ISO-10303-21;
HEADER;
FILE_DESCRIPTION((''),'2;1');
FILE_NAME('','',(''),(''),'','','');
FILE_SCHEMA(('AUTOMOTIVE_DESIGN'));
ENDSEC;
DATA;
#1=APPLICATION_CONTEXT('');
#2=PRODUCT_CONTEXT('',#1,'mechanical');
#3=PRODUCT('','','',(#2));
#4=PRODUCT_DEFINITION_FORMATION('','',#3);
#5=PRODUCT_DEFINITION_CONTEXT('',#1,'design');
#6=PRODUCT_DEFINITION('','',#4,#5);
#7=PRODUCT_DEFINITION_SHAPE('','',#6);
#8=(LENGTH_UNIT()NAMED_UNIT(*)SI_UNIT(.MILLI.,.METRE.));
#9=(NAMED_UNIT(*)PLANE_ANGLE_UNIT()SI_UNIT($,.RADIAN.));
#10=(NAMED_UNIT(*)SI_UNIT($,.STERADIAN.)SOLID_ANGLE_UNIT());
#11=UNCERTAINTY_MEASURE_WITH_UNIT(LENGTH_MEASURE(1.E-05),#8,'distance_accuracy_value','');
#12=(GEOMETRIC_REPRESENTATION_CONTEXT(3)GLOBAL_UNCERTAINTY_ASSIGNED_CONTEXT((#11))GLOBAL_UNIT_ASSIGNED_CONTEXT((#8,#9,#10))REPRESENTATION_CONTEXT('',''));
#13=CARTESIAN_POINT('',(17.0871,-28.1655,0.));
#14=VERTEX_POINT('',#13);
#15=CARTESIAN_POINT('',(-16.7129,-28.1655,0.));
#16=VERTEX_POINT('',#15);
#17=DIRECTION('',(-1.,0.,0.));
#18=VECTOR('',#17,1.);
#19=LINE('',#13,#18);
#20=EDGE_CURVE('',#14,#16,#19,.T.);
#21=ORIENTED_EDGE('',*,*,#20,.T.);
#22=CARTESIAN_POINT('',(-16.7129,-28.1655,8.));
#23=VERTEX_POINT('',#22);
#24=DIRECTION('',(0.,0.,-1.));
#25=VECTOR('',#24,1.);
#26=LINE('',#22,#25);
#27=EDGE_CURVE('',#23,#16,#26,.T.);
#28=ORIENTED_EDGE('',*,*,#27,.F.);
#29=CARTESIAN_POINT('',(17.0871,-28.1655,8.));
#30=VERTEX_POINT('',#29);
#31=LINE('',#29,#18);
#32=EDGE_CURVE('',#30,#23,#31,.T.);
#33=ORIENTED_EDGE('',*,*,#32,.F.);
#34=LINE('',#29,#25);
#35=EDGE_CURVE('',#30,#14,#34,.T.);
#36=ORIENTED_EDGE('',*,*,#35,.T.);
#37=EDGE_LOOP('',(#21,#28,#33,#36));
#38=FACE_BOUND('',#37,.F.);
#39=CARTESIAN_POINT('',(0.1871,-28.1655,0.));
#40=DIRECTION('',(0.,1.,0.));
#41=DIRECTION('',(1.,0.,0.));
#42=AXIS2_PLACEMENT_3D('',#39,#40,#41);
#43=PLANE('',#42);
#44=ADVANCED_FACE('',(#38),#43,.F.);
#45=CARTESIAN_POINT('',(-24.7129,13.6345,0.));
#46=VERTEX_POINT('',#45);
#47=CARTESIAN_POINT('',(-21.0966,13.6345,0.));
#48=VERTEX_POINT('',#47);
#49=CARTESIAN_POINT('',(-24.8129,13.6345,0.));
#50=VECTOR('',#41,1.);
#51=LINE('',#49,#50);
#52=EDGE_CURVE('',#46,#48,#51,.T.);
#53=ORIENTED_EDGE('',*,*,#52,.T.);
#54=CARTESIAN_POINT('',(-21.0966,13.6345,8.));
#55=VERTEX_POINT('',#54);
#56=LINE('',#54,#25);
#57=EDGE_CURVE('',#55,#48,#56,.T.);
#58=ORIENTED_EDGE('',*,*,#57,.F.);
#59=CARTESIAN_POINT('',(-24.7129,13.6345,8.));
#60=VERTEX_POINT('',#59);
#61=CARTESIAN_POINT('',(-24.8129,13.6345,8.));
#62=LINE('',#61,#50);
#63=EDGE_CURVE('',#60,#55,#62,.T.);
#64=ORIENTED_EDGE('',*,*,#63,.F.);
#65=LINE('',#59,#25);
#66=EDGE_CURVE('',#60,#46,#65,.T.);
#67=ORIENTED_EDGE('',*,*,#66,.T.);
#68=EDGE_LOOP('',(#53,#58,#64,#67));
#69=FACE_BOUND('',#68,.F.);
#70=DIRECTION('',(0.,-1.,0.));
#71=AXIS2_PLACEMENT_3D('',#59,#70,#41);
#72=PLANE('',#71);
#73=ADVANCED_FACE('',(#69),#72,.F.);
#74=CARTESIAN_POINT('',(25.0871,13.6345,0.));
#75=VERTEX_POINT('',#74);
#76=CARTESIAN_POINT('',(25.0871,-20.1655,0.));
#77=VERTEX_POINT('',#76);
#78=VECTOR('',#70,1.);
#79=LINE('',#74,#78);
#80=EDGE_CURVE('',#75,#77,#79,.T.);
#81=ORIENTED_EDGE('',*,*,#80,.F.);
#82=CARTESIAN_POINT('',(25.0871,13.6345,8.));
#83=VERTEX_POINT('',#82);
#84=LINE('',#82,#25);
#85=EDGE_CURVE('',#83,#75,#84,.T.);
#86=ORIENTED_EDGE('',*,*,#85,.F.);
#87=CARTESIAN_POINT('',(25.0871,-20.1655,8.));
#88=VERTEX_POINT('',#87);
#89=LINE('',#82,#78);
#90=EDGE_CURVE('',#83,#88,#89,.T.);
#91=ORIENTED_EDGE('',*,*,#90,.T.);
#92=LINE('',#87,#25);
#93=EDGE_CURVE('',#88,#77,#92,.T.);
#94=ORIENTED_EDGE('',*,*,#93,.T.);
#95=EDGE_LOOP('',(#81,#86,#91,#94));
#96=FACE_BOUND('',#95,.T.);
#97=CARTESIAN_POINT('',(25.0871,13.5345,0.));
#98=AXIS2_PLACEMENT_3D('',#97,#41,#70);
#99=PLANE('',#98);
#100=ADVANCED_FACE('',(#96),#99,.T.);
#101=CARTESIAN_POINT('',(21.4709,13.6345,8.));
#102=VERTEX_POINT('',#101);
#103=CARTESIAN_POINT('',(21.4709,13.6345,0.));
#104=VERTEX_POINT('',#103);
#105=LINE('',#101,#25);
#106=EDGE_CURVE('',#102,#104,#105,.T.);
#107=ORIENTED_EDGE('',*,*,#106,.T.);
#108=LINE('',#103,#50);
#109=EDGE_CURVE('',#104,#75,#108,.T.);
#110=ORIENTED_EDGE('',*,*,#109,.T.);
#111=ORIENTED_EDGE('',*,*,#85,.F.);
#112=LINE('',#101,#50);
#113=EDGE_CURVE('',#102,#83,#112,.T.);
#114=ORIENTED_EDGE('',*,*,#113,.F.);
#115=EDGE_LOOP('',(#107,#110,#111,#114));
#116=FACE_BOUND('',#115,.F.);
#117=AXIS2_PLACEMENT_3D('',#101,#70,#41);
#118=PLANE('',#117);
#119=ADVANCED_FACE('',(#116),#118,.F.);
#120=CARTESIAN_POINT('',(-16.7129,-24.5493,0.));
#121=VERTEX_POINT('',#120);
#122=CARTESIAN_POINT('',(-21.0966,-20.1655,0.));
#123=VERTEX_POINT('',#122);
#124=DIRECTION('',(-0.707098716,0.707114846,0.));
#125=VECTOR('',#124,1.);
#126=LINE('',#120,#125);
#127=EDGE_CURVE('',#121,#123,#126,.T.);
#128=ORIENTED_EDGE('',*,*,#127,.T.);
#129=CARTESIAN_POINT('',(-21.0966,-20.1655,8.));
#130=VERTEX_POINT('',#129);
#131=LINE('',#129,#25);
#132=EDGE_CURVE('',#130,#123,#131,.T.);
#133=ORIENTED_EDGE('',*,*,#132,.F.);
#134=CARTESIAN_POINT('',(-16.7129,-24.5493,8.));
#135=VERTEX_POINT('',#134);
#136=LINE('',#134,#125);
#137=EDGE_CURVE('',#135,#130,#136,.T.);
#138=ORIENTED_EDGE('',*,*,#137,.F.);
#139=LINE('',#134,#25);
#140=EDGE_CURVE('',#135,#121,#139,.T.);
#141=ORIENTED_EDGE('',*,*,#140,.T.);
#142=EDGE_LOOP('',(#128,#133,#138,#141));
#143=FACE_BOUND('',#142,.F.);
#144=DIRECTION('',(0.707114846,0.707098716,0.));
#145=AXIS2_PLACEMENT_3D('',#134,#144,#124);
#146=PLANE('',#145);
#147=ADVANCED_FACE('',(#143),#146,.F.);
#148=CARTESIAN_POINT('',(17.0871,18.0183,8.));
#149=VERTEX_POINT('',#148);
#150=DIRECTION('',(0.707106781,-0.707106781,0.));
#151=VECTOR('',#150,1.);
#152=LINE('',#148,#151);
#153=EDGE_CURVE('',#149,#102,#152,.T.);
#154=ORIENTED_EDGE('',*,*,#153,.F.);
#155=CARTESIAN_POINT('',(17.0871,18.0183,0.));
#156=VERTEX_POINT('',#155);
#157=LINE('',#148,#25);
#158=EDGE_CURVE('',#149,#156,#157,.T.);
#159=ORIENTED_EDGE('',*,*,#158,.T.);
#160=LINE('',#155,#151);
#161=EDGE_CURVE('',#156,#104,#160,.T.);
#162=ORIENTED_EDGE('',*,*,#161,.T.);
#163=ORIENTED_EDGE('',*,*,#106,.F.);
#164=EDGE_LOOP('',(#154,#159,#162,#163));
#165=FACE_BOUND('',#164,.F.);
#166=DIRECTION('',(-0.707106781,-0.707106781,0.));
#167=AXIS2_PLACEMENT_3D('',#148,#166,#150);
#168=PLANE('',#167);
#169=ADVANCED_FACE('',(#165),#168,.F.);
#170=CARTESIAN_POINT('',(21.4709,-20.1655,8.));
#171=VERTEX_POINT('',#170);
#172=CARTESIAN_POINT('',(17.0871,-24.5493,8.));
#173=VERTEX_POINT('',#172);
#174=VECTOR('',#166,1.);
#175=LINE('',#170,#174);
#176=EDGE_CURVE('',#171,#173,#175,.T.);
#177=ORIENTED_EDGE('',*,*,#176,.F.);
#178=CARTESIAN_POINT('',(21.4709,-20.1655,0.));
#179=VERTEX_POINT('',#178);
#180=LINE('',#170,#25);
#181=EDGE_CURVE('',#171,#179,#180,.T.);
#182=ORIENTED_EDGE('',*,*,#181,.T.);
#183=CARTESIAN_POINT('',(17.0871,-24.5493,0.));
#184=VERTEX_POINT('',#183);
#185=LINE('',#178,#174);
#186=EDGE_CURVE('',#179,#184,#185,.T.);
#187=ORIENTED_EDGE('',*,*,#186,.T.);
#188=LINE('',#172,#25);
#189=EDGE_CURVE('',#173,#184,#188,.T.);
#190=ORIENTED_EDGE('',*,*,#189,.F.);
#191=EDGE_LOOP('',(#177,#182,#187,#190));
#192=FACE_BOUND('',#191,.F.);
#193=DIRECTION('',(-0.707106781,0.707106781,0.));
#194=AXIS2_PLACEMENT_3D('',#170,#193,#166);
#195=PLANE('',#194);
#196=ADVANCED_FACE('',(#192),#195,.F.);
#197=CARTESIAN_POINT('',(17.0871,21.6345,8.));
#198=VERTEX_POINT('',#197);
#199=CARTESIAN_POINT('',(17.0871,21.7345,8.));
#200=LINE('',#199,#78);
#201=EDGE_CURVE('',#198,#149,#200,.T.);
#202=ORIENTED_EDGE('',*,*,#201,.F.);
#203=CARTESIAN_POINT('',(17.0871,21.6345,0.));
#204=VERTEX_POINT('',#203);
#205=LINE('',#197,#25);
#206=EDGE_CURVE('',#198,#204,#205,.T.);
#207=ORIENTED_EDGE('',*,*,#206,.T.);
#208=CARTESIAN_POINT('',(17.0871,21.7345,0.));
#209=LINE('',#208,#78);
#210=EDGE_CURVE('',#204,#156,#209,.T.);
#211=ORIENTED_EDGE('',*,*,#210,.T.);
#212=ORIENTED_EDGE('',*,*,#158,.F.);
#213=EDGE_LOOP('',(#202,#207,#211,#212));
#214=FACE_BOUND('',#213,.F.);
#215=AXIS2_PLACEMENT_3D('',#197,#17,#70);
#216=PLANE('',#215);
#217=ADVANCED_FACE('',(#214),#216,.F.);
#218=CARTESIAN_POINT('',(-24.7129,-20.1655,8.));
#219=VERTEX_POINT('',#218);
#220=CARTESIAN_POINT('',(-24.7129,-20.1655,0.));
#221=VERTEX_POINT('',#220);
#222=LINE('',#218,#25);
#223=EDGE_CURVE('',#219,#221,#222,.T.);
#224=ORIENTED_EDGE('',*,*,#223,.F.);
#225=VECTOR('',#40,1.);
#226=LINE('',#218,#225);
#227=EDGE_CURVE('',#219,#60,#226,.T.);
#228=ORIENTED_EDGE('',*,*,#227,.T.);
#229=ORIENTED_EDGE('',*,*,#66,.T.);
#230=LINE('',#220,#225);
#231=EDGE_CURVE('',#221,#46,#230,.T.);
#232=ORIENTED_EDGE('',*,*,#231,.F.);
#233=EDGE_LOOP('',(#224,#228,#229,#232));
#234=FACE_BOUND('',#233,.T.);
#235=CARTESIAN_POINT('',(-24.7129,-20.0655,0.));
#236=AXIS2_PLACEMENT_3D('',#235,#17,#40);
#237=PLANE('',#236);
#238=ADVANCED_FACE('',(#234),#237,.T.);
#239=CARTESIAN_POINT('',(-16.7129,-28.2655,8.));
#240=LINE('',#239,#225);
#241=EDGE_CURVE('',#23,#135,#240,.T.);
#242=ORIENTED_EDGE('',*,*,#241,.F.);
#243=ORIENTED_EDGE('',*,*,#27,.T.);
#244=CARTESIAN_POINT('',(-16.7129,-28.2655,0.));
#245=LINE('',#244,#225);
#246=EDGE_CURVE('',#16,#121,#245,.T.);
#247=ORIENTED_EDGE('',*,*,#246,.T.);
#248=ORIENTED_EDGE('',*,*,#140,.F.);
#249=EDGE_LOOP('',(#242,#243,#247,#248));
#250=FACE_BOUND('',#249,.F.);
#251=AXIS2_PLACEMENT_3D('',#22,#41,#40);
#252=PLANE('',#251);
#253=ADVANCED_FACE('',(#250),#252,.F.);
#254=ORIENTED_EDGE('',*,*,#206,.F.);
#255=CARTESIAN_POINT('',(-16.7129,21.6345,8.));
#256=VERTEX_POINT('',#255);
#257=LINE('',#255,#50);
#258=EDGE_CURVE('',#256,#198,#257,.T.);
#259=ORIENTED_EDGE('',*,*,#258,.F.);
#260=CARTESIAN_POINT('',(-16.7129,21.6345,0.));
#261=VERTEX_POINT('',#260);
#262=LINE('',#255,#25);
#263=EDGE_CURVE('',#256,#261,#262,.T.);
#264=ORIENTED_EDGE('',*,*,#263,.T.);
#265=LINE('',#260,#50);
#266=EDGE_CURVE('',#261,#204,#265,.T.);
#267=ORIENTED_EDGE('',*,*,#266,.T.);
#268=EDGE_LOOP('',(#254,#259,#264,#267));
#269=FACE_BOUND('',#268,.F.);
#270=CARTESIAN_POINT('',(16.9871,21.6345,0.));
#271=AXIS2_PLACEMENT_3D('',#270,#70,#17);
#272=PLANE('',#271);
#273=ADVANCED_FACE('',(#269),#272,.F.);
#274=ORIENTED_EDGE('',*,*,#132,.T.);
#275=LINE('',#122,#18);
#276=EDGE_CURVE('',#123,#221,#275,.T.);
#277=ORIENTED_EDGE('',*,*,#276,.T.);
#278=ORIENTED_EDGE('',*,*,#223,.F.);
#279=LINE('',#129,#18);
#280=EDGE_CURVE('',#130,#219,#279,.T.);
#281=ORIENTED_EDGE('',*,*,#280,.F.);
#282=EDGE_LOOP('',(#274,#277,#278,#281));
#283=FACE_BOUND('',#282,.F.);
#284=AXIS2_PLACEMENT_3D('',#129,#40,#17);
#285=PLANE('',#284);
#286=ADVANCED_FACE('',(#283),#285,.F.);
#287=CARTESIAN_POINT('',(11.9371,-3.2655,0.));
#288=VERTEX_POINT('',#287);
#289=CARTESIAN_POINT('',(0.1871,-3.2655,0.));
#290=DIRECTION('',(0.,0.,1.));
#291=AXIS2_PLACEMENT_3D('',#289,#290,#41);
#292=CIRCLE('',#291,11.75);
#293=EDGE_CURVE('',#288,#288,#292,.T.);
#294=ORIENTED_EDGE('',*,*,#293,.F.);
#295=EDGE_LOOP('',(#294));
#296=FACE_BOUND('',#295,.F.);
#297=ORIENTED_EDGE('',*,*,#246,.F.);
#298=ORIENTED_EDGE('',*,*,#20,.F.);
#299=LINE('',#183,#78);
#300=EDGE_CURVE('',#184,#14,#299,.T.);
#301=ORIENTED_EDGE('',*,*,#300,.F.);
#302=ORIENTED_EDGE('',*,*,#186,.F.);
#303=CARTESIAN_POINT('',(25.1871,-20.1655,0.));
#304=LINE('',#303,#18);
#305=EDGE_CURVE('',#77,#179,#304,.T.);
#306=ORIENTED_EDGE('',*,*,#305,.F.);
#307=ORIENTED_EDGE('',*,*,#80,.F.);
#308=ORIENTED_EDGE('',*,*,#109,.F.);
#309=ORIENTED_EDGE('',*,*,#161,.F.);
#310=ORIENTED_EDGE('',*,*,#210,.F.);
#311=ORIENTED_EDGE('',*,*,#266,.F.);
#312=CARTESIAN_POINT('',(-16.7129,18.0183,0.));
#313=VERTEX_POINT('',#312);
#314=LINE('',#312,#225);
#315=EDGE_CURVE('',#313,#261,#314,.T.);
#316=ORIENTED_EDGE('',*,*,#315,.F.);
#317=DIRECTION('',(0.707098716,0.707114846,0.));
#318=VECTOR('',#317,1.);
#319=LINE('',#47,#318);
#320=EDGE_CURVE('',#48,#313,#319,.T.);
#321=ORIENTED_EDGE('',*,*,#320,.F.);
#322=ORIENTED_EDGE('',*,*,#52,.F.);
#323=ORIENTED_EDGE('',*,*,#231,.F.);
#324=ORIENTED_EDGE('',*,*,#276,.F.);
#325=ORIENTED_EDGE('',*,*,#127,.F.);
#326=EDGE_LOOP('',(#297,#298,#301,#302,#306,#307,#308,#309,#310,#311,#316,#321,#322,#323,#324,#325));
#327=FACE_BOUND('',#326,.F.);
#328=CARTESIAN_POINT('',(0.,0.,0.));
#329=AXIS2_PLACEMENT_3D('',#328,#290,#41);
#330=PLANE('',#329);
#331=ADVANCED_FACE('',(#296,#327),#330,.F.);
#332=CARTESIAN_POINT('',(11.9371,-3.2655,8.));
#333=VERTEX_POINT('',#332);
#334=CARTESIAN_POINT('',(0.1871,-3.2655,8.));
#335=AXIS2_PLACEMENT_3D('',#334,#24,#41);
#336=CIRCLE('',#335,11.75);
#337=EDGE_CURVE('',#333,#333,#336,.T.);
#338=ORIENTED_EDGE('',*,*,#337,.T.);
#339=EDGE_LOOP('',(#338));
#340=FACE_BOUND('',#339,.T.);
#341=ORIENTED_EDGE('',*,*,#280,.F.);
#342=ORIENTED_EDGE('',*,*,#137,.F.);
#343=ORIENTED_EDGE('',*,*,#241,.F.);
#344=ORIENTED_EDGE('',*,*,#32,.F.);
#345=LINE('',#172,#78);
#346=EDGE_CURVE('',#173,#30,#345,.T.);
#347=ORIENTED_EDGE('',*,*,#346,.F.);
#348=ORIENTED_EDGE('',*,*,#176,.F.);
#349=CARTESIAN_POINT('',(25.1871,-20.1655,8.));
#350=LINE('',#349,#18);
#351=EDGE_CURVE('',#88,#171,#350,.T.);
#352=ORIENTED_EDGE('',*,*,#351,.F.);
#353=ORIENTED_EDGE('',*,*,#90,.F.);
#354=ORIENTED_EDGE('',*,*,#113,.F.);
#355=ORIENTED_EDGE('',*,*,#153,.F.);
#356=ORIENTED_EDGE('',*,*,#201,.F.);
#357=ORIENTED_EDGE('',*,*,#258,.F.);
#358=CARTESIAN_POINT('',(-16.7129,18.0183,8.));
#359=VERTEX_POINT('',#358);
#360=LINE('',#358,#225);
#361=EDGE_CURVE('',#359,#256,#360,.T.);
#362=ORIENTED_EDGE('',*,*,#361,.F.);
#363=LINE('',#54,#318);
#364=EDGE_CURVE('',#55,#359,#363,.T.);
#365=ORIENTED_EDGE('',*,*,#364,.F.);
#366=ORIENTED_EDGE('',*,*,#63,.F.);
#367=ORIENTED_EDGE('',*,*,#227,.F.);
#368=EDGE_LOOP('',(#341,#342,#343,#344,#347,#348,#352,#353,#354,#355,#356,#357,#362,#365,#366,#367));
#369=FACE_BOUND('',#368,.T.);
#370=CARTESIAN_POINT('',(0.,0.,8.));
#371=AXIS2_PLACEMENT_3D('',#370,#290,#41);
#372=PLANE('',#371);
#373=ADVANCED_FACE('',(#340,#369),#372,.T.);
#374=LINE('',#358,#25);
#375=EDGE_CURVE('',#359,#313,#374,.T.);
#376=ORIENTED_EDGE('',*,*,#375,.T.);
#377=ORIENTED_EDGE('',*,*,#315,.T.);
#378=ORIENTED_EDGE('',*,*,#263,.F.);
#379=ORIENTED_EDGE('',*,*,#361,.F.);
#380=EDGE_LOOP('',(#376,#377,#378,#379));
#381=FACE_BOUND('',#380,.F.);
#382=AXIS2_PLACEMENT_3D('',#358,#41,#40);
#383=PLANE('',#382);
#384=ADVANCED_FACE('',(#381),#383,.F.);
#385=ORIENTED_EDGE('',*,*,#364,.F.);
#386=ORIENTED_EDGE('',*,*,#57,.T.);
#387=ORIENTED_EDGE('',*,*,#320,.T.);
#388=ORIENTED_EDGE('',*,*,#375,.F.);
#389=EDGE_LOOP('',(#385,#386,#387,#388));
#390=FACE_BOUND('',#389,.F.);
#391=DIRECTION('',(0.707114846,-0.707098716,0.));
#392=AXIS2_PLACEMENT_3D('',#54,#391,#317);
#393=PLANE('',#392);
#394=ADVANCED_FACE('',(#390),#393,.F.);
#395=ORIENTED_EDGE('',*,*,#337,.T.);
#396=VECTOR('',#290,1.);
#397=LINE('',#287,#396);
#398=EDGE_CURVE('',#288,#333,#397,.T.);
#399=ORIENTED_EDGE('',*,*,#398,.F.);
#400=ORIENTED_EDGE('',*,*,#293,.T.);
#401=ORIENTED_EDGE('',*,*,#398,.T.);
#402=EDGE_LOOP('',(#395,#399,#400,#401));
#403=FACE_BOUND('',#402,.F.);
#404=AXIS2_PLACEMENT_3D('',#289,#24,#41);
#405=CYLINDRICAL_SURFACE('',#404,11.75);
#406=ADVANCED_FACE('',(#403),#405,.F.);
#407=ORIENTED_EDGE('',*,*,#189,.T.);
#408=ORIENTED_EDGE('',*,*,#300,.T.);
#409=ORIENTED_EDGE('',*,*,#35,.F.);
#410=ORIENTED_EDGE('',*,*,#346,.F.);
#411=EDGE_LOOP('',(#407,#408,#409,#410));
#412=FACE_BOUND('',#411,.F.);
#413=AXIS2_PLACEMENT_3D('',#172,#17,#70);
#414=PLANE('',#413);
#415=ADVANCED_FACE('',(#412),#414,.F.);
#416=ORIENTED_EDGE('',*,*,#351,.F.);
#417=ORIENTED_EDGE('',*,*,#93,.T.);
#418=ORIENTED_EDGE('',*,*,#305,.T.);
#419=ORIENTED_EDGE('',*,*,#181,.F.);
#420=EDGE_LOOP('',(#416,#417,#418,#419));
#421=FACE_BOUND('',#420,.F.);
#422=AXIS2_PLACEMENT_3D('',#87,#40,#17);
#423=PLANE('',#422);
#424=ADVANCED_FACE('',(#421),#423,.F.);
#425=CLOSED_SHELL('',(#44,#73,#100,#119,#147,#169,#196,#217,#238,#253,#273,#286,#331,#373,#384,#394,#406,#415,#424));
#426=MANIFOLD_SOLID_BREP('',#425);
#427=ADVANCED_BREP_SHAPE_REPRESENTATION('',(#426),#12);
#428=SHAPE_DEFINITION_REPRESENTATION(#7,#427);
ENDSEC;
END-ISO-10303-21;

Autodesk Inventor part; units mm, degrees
ref_plane "YZ Plane" through (0, 0, 0) normal (1, 0, 0) x (0, 1, 0)
ref_plane "XZ Plane" through (0, 0, 0) normal (0, 1, 0) x (-1, 0, 0)
ref_plane "XY Plane" through (0, 0, 0) normal (0, 0, 1) x (1, 0, 0)
sketch "Sketch1" plane through (0, 0, 0) normal (0, 0, 1) x (1, 0, 0)
  line L0 (21.5871, 13.6345) -> (17.0871, 18.1345) projected
  line L1 (17.0871, 18.1345) -> (-16.7129, 18.1345) projected
  line L2 (-16.7129, 18.1345) -> (-21.2129, 13.6345) projected
  line L3 (-21.0966, 13.6345) -> (-21.0966, -20.1655) projected
  line L4 (21.4709, -20.1655) -> (21.4709, 13.6345) projected
  line L5 (21.4709, -20.1655) -> (17.0871, -24.4078) projected
  line L6 (-16.7129, -24.4078) -> (17.0871, -24.4078) projected
  line L7 (-16.7129, -24.4078) -> (-21.0966, -20.1655) projected
  line L8 (-24.7129, -28.1655) -> (-24.7129, 13.6345) construction
  line L9 (25.0871, -28.1655) -> (-24.7129, -28.1655) construction
  line L10 (25.0871, -28.1655) -> (25.0871, 13.6345) construction
  line L11 (17.0871, 21.6345) -> (-16.7129, 21.6345) construction
  line L12 (0.1871, -36.5255) -> (0.1871, 21.9945)
  line L13 (14.6206, -3.2655) -> (-14.2825, -3.2655) construction
  line L14 (-21.0552, -20.0655) -> (-16.6129, -24.5078)
  line L15 (-16.6129, -24.5078) -> (-16.6129, -28.1655)
  line L16 (-16.6129, -28.1655) -> (16.9871, -28.1655)
  line L17 (16.9871, -28.1655) -> (16.9871, -24.5078)
  line L18 (16.9871, -24.5078) -> (21.4295, -20.0655)
  line L19 (25.0871, -20.0655) -> (21.4295, -20.0655)
  line L20 (25.0871, 13.5345) -> (25.0871, -20.0655)
  line L21 (21.4295, 13.5345) -> (25.0871, 13.5345)
  line L22 (21.4295, 13.5345) -> (16.9871, 17.9768)
  line L23 (16.9871, 17.9768) -> (16.9871, 21.6345)
  line L24 (16.9871, 21.6345) -> (-16.6129, 21.6345)
  line L25 (-16.6129, 21.6345) -> (-16.6129, 17.9768)
  line L26 (-16.6129, 17.9768) -> (-21.0552, 13.5345)
  line L27 (-24.7129, 13.5345) -> (-21.0552, 13.5345)
  line L28 (-24.7129, -20.0655) -> (-24.7129, 13.5345)
  line L29 (-21.0552, -20.0655) -> (-24.7129, -20.0655)
  circle A0 centre (0.1871, -3.2655) radius 11.75
  point P0 (14.2, -44.8454)
  point P1 (11.9334, -2.9712)
  point P2 (-1.4501, -14.9009)
  point P3 (-5.6, -13.4915)
  point P4 (-9.0465, 4.0011)
  point P5 (-6.23, 6.5774)
  point P6 (11.3484, 0.4071)
  point P7 (16.9871, 19.8057)
  dimension "d48" = 23.5
extrude "Extrusion1" add sketch "Sketch1" along normal blind 8 contours L23 L22 L21 L4 L19 L18 L6 L12 A0 L1 | L1 L12 L24 L23 | L12 A0 L6 L14 L29 L3 L27 L26 L25 L1 | L1 L25 L24 L12 | L21 L20 L19 L4 | L12 L16 L15 L14 L6 | L6 L18 L17 L16 L12 | L3 L29 L28 L27
sketch "Skizze3" plane through (0, 0, 8) normal (0, 0, 1) x (1, 0, 0)
  circle A0 centre (0.1871, -3.2655) radius 11.75 construction
  line L0 (-21.0552, -20.0655) -> (-16.6129, -24.5078) projected
  line L1 (-16.6129, -24.5078) -> (-16.6129, -28.1655) projected
  line L2 (-16.6129, -28.1655) -> (16.9871, -28.1655) construction
  line L3 (16.9871, -28.1655) -> (16.9871, -24.5078) projected
  line L4 (16.9871, -24.5078) -> (21.4295, -20.0655) projected
  line L5 (21.4295, -20.0655) -> (25.0871, -20.0655) projected
  line L6 (25.0871, -20.0655) -> (25.0871, 13.5345) construction
  line L7 (25.0871, 13.5345) -> (21.4295, 13.5345) projected
  line L8 (21.4295, 13.5345) -> (16.9871, 17.9768) projected
  line L9 (16.9871, 17.9768) -> (16.9871, 21.6345) projected
  line L10 (16.9871, 21.6345) -> (-16.6129, 21.6345) construction
  line L11 (-16.6129, 21.6345) -> (-16.6129, 17.9768) projected
  line L12 (-16.6129, 17.9768) -> (-21.0552, 13.5345) projected
  line L13 (-21.0552, 13.5345) -> (-24.7129, 13.5345) projected
  line L14 (-24.7129, 13.5345) -> (-24.7129, -20.0655) construction
  line L15 (-24.7129, -20.0655) -> (-21.0552, -20.0655) projected
  line L16 (-16.7129, 21.7345) -> (17.0871, 21.7345) construction
  line L17 (17.0871, 21.7345) -> (17.0871, 18.0183)
  line L18 (17.0871, 18.0183) -> (21.4709, 13.6345)
  line L19 (21.4709, 13.6345) -> (25.1871, 13.6345)
  line L20 (25.1871, 13.6345) -> (25.1871, -20.1655) construction
  line L21 (25.1871, -20.1655) -> (21.4709, -20.1655)
  line L22 (21.4709, -20.1655) -> (17.0871, -24.5493)
  line L23 (17.0871, -24.5493) -> (17.0871, -28.2655)
  line L24 (17.0871, -28.2655) -> (-16.7129, -28.2655) construction
  line L25 (-16.7129, -28.2655) -> (-16.7129, -24.5493)
  line L26 (-16.7129, -24.5493) -> (-21.0966, -20.1655)
  line L27 (-21.0966, -20.1655) -> (-24.8129, -20.1655)
  line L28 (-24.8129, -20.1655) -> (-24.8129, 13.6345) construction
  line L29 (-24.8129, 13.6345) -> (-21.0966, 13.6345)
  line L30 (-21.0966, 13.6345) -> (-16.7129, 18.0183)
  line L31 (-16.7129, 18.0183) -> (-16.7129, 21.7345)
  line L32 (-21.0552, 13.5345) -> (-24.7129, 13.5345) projected
  line L33 (-24.7129, 13.5345) -> (-24.7129, 13.6345)
  line L34 (-16.6129, 21.6345) -> (-16.7129, 21.6345)
  line L35 (16.9871, 21.6345) -> (17.0871, 21.6345)
  line L36 (25.0871, 13.5345) -> (25.0871, 13.6345)
  line L37 (25.0871, -20.0655) -> (25.0871, -20.1655)
  line L38 (-16.6129, -28.1655) -> (16.9871, -28.1655) projected
  line L39 (16.9871, -28.1655) -> (17.0871, -28.1655)
  line L40 (-16.6129, -28.1655) -> (-16.7129, -28.1655)
  line L41 (-24.7129, -20.0655) -> (-24.7129, -20.1655)
  point P0 (0, 0)
  dimension "d52" = 0.1
extrude "IM_offset" add sketch "Skizze3" against normal up to surface (8 mm away)
properties part number "20_Cube_Insert_Holder-okular+flashlight_v3"
